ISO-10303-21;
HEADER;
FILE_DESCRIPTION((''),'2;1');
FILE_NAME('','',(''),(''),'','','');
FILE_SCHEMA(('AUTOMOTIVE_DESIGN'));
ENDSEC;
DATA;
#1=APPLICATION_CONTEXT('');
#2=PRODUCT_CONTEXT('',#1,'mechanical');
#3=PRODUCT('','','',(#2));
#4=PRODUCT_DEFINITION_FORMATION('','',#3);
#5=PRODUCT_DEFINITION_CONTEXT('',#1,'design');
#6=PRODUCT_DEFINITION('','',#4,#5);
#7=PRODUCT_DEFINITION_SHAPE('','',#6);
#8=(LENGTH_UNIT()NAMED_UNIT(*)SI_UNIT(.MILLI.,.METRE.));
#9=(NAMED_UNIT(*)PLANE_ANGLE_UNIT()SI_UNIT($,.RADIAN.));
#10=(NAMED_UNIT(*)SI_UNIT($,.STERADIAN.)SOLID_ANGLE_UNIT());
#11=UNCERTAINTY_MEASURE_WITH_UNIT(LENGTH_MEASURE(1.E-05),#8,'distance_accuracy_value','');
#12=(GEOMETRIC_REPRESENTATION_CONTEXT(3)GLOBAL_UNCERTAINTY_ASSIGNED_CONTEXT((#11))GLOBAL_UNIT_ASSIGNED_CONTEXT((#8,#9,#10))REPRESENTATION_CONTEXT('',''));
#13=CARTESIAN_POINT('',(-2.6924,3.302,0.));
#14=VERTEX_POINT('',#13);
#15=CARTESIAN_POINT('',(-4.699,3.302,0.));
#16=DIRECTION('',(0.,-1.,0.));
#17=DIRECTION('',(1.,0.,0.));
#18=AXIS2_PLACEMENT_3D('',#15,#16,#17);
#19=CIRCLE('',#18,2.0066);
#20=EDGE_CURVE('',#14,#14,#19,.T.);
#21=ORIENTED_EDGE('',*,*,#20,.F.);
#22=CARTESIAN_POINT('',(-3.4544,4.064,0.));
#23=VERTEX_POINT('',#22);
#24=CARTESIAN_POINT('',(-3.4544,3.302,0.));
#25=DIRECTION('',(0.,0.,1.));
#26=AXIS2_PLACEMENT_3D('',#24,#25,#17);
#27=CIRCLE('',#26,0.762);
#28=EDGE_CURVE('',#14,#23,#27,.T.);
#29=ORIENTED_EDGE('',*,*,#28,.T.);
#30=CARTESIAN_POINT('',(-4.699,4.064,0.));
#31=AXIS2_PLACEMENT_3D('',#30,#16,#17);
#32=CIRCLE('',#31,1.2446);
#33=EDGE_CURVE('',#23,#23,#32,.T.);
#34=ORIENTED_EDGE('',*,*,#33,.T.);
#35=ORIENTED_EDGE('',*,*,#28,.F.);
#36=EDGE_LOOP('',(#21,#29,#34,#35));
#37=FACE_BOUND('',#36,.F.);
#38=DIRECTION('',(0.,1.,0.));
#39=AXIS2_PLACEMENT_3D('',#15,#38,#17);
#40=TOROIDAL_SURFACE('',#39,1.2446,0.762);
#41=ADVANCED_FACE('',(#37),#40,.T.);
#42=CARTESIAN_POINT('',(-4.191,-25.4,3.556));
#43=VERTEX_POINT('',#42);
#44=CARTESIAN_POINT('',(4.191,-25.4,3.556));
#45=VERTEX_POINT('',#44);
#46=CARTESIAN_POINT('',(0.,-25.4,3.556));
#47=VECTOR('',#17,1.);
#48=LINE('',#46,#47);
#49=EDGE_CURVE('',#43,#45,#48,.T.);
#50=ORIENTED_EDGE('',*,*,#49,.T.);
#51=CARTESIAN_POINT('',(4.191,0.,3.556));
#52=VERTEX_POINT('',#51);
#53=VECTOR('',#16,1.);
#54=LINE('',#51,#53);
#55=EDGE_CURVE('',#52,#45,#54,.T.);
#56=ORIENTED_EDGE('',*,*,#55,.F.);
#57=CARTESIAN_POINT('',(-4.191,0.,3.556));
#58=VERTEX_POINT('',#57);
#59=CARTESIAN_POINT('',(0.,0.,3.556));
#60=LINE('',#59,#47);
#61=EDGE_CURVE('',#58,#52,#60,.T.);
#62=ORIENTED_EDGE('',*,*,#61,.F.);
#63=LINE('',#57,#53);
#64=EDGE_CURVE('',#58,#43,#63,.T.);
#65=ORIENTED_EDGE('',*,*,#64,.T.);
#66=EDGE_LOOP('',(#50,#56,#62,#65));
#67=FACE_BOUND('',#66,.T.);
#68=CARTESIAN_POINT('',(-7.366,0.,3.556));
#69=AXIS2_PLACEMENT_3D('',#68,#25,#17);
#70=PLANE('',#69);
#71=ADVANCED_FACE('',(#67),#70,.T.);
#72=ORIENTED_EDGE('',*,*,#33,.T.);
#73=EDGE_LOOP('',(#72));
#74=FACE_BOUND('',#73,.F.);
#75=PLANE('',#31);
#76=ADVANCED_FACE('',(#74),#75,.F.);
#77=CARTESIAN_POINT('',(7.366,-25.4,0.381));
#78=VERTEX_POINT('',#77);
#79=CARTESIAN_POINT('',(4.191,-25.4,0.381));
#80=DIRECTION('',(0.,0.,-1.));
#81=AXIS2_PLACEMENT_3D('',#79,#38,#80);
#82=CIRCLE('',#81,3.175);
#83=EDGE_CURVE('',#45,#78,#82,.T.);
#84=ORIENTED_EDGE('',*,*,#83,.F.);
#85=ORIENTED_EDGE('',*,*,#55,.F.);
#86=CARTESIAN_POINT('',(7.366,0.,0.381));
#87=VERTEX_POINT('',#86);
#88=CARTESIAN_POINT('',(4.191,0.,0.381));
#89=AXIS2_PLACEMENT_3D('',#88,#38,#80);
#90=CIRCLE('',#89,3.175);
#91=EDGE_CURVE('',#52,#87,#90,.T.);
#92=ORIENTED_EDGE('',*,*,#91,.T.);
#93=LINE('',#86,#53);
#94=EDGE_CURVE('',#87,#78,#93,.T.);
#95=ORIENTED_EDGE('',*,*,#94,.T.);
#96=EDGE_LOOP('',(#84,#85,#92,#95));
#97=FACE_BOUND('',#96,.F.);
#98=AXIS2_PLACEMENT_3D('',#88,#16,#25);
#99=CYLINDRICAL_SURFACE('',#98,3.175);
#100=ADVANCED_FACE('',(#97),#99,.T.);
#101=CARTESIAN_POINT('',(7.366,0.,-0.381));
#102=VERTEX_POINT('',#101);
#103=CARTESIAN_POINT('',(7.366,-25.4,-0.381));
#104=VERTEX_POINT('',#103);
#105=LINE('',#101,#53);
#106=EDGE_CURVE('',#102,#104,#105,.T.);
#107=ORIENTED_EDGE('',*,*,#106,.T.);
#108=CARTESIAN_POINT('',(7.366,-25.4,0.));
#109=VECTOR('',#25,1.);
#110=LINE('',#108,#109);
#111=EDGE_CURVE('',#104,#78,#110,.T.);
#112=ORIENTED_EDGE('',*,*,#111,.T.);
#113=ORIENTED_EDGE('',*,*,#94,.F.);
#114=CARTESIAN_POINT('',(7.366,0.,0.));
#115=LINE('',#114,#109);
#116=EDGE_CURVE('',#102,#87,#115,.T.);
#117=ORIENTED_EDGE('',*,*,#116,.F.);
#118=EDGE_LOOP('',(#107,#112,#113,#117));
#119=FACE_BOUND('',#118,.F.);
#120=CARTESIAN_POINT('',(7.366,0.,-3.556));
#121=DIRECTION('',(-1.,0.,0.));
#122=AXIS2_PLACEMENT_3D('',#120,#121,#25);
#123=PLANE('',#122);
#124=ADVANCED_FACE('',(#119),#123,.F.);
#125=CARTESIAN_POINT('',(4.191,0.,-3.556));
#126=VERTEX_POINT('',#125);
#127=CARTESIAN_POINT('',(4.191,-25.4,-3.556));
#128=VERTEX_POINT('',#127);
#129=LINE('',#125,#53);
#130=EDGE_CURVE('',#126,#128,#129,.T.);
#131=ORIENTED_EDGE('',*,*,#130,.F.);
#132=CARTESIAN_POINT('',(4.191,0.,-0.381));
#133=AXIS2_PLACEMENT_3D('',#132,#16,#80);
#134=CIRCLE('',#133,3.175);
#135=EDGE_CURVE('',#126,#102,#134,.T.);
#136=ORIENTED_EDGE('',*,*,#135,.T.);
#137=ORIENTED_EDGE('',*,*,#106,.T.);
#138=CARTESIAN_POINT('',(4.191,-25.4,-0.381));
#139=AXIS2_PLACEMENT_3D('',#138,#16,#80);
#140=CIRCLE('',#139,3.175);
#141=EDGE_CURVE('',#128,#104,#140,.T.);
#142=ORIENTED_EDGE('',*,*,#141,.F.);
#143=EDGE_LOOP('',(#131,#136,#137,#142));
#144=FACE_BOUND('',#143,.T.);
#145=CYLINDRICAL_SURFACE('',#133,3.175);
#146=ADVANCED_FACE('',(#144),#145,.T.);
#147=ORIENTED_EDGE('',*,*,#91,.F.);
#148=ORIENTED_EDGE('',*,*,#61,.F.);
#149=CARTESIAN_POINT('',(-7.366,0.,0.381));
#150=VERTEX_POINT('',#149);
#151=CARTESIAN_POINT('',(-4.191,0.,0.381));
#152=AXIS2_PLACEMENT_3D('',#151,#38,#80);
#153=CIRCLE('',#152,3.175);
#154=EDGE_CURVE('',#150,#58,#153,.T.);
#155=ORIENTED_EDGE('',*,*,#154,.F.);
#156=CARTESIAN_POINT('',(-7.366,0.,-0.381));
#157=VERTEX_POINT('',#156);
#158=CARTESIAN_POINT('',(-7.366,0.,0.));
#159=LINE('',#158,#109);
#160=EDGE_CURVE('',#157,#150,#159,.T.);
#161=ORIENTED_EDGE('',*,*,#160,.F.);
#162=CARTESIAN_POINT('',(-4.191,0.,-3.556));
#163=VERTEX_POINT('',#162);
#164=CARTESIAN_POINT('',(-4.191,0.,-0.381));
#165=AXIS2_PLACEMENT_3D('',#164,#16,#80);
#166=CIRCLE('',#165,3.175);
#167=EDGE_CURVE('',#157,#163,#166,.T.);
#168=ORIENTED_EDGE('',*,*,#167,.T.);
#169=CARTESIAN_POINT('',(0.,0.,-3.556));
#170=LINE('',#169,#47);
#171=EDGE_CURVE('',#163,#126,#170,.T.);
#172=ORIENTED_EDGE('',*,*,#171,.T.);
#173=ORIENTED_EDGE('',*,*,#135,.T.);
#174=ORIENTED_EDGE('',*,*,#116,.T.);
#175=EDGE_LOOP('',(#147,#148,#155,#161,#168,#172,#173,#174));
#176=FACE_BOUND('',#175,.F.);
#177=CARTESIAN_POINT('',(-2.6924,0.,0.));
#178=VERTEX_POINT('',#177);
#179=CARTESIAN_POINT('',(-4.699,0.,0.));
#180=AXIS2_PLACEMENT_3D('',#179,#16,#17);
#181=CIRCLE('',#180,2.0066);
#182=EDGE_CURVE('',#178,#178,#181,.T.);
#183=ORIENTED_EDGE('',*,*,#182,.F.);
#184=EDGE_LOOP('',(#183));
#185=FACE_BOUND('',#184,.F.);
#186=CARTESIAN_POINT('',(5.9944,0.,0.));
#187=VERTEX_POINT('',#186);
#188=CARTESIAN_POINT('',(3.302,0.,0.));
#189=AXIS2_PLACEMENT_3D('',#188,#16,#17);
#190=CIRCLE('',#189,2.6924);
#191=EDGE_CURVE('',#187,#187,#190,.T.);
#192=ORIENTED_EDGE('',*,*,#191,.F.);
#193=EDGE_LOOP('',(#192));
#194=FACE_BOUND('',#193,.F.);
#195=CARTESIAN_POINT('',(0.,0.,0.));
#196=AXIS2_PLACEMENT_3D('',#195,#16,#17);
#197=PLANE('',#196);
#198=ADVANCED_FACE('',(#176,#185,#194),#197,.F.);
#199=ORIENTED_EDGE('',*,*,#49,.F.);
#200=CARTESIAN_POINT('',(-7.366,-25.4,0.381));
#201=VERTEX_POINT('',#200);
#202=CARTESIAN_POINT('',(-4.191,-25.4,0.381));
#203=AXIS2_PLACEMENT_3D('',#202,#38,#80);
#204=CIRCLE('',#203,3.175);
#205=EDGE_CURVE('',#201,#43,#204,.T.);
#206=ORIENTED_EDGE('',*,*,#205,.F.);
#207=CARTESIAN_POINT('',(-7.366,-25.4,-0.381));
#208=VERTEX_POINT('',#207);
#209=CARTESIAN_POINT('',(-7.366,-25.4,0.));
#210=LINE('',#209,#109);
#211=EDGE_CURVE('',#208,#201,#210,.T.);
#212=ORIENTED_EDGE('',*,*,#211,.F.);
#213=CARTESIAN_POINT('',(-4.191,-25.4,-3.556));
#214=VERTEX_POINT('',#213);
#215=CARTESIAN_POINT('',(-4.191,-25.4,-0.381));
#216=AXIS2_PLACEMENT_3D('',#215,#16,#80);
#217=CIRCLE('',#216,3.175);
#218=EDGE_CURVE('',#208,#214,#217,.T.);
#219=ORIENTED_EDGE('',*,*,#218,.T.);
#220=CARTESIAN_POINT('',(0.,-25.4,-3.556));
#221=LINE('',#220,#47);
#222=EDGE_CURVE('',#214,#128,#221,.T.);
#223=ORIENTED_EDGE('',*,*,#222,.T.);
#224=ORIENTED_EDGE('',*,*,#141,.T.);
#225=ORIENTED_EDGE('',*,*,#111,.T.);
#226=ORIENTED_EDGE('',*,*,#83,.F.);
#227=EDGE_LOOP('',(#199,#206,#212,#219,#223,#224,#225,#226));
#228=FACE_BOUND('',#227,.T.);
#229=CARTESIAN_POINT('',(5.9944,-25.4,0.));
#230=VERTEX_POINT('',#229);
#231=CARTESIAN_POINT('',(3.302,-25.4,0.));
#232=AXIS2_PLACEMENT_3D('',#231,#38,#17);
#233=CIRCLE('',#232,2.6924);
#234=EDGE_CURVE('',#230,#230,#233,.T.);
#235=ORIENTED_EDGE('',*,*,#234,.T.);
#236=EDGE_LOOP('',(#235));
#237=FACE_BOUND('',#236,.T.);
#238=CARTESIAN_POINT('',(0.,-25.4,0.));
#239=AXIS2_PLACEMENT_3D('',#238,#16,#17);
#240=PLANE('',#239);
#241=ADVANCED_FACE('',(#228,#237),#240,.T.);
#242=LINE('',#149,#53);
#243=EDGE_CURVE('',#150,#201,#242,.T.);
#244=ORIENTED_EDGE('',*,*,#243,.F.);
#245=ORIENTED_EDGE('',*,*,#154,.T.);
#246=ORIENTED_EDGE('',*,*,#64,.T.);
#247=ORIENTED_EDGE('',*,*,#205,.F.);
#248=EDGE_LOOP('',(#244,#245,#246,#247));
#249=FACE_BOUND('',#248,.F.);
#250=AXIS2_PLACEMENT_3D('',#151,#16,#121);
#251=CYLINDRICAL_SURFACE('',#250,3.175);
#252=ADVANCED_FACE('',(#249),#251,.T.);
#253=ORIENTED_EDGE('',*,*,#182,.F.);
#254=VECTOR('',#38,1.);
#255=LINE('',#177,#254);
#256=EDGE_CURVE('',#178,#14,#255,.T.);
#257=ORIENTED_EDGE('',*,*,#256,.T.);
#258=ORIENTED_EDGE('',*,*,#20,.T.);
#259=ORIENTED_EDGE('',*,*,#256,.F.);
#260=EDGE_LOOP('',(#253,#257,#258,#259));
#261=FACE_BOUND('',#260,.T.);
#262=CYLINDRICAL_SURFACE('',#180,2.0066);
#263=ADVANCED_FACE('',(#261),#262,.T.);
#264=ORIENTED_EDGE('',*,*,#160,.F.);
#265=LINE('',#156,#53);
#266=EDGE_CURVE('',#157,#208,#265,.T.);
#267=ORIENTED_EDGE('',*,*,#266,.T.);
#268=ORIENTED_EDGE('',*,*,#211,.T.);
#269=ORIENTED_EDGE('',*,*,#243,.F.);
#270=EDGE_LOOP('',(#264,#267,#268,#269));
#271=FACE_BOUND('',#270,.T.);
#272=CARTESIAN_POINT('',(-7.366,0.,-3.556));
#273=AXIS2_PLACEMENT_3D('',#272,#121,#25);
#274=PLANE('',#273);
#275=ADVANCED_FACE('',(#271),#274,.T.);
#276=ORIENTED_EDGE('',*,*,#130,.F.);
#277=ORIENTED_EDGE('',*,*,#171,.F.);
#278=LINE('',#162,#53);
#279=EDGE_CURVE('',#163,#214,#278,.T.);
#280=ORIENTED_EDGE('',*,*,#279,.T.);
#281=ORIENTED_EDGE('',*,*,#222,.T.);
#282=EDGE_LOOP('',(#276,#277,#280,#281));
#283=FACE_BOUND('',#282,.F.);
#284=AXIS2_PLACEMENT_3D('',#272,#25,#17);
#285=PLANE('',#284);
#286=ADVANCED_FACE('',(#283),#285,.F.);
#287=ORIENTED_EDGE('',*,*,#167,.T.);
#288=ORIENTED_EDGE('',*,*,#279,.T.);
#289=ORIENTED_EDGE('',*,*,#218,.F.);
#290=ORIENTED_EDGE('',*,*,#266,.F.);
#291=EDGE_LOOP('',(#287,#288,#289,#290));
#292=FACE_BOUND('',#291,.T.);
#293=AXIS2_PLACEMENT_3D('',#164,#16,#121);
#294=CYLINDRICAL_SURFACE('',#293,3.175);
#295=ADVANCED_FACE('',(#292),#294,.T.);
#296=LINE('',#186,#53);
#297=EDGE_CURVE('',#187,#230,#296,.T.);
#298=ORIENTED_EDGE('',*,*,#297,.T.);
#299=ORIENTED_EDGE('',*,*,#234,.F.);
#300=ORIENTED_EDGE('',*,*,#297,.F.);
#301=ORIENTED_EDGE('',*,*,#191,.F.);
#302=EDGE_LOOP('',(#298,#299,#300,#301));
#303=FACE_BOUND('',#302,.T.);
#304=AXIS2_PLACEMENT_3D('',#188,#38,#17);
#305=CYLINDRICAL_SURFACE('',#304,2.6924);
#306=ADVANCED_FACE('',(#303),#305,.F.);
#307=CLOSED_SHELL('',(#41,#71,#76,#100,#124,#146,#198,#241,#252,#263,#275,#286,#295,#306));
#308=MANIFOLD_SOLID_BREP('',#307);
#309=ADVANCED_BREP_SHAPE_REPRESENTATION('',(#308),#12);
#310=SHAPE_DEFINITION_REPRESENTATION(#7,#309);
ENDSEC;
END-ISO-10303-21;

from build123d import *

# Parameters (mm, degrees)
F0_W     = 14.732
F0_H     = 7.112
F0_R     = 2.0066
F0_R_2   = 2.6924
F1_DEPTH = 25.4
F2_DEPTH = 25.401
F3_DEPTH = 4.064
F4_R     = 1.3208
F5_DEPTH = 25.401
F6_R     = 0.762
F7_R     = 3.175


# Not quite as in the source:
# - a feature names something its author has since deleted; it is built from what else it names


with BuildPart() as f1:
    # F0 (on Front) → F1 (new body)
    with BuildSketch(Plane.XZ):
        Rectangle(F0_W, F0_H)
        with Locations((-4.699, 0)):
            Circle(F0_R, mode=Mode.SUBTRACT)
        with Locations((3.302, 0)):
            Circle(F0_R_2, mode=Mode.SUBTRACT)
        with Locations((3.302, 0)):
            Circle(F0_R_2)
        with Locations((-4.699, 0)):
            Circle(F0_R)
    extrude(amount=F1_DEPTH)

    # F0 (on Front) → F2 (cut, through all)
    with BuildSketch(Plane.XZ):
        with Locations((3.302, 0)):
            Circle(F0_R_2)
    extrude(amount=F2_DEPTH, mode=Mode.SUBTRACT)

    # F0 (on Front) → F3 (join)
    with BuildSketch(Plane.XZ):
        with Locations((-4.699, 0)):
            Circle(F0_R)
    extrude(amount=-F3_DEPTH)

    # F4 (on face) → F5 (cut, through all)
    with BuildSketch(Plane.XZ):
        with Locations((3.302, 0)):
            Circle(F4_R)
    extrude(amount=F5_DEPTH, mode=Mode.SUBTRACT)

    # F6
    f6_edges = [f1.edges().sort_by_distance(p)[0] for p in [
        (-6.7056, 4.064, 0),
    ]]
    fillet(f6_edges, radius=F6_R)

    # F7
    f7_edges = [f1.edges().sort_by_distance(p)[0] for p in [
        (7.366, -12.7, 3.556),
        (7.366, -12.7, -3.556),
        (-7.366, -12.7, -3.556),
        (-7.366, -12.7, 3.556),
    ]]
    fillet(f7_edges, radius=F7_R)


solid = f1.part
